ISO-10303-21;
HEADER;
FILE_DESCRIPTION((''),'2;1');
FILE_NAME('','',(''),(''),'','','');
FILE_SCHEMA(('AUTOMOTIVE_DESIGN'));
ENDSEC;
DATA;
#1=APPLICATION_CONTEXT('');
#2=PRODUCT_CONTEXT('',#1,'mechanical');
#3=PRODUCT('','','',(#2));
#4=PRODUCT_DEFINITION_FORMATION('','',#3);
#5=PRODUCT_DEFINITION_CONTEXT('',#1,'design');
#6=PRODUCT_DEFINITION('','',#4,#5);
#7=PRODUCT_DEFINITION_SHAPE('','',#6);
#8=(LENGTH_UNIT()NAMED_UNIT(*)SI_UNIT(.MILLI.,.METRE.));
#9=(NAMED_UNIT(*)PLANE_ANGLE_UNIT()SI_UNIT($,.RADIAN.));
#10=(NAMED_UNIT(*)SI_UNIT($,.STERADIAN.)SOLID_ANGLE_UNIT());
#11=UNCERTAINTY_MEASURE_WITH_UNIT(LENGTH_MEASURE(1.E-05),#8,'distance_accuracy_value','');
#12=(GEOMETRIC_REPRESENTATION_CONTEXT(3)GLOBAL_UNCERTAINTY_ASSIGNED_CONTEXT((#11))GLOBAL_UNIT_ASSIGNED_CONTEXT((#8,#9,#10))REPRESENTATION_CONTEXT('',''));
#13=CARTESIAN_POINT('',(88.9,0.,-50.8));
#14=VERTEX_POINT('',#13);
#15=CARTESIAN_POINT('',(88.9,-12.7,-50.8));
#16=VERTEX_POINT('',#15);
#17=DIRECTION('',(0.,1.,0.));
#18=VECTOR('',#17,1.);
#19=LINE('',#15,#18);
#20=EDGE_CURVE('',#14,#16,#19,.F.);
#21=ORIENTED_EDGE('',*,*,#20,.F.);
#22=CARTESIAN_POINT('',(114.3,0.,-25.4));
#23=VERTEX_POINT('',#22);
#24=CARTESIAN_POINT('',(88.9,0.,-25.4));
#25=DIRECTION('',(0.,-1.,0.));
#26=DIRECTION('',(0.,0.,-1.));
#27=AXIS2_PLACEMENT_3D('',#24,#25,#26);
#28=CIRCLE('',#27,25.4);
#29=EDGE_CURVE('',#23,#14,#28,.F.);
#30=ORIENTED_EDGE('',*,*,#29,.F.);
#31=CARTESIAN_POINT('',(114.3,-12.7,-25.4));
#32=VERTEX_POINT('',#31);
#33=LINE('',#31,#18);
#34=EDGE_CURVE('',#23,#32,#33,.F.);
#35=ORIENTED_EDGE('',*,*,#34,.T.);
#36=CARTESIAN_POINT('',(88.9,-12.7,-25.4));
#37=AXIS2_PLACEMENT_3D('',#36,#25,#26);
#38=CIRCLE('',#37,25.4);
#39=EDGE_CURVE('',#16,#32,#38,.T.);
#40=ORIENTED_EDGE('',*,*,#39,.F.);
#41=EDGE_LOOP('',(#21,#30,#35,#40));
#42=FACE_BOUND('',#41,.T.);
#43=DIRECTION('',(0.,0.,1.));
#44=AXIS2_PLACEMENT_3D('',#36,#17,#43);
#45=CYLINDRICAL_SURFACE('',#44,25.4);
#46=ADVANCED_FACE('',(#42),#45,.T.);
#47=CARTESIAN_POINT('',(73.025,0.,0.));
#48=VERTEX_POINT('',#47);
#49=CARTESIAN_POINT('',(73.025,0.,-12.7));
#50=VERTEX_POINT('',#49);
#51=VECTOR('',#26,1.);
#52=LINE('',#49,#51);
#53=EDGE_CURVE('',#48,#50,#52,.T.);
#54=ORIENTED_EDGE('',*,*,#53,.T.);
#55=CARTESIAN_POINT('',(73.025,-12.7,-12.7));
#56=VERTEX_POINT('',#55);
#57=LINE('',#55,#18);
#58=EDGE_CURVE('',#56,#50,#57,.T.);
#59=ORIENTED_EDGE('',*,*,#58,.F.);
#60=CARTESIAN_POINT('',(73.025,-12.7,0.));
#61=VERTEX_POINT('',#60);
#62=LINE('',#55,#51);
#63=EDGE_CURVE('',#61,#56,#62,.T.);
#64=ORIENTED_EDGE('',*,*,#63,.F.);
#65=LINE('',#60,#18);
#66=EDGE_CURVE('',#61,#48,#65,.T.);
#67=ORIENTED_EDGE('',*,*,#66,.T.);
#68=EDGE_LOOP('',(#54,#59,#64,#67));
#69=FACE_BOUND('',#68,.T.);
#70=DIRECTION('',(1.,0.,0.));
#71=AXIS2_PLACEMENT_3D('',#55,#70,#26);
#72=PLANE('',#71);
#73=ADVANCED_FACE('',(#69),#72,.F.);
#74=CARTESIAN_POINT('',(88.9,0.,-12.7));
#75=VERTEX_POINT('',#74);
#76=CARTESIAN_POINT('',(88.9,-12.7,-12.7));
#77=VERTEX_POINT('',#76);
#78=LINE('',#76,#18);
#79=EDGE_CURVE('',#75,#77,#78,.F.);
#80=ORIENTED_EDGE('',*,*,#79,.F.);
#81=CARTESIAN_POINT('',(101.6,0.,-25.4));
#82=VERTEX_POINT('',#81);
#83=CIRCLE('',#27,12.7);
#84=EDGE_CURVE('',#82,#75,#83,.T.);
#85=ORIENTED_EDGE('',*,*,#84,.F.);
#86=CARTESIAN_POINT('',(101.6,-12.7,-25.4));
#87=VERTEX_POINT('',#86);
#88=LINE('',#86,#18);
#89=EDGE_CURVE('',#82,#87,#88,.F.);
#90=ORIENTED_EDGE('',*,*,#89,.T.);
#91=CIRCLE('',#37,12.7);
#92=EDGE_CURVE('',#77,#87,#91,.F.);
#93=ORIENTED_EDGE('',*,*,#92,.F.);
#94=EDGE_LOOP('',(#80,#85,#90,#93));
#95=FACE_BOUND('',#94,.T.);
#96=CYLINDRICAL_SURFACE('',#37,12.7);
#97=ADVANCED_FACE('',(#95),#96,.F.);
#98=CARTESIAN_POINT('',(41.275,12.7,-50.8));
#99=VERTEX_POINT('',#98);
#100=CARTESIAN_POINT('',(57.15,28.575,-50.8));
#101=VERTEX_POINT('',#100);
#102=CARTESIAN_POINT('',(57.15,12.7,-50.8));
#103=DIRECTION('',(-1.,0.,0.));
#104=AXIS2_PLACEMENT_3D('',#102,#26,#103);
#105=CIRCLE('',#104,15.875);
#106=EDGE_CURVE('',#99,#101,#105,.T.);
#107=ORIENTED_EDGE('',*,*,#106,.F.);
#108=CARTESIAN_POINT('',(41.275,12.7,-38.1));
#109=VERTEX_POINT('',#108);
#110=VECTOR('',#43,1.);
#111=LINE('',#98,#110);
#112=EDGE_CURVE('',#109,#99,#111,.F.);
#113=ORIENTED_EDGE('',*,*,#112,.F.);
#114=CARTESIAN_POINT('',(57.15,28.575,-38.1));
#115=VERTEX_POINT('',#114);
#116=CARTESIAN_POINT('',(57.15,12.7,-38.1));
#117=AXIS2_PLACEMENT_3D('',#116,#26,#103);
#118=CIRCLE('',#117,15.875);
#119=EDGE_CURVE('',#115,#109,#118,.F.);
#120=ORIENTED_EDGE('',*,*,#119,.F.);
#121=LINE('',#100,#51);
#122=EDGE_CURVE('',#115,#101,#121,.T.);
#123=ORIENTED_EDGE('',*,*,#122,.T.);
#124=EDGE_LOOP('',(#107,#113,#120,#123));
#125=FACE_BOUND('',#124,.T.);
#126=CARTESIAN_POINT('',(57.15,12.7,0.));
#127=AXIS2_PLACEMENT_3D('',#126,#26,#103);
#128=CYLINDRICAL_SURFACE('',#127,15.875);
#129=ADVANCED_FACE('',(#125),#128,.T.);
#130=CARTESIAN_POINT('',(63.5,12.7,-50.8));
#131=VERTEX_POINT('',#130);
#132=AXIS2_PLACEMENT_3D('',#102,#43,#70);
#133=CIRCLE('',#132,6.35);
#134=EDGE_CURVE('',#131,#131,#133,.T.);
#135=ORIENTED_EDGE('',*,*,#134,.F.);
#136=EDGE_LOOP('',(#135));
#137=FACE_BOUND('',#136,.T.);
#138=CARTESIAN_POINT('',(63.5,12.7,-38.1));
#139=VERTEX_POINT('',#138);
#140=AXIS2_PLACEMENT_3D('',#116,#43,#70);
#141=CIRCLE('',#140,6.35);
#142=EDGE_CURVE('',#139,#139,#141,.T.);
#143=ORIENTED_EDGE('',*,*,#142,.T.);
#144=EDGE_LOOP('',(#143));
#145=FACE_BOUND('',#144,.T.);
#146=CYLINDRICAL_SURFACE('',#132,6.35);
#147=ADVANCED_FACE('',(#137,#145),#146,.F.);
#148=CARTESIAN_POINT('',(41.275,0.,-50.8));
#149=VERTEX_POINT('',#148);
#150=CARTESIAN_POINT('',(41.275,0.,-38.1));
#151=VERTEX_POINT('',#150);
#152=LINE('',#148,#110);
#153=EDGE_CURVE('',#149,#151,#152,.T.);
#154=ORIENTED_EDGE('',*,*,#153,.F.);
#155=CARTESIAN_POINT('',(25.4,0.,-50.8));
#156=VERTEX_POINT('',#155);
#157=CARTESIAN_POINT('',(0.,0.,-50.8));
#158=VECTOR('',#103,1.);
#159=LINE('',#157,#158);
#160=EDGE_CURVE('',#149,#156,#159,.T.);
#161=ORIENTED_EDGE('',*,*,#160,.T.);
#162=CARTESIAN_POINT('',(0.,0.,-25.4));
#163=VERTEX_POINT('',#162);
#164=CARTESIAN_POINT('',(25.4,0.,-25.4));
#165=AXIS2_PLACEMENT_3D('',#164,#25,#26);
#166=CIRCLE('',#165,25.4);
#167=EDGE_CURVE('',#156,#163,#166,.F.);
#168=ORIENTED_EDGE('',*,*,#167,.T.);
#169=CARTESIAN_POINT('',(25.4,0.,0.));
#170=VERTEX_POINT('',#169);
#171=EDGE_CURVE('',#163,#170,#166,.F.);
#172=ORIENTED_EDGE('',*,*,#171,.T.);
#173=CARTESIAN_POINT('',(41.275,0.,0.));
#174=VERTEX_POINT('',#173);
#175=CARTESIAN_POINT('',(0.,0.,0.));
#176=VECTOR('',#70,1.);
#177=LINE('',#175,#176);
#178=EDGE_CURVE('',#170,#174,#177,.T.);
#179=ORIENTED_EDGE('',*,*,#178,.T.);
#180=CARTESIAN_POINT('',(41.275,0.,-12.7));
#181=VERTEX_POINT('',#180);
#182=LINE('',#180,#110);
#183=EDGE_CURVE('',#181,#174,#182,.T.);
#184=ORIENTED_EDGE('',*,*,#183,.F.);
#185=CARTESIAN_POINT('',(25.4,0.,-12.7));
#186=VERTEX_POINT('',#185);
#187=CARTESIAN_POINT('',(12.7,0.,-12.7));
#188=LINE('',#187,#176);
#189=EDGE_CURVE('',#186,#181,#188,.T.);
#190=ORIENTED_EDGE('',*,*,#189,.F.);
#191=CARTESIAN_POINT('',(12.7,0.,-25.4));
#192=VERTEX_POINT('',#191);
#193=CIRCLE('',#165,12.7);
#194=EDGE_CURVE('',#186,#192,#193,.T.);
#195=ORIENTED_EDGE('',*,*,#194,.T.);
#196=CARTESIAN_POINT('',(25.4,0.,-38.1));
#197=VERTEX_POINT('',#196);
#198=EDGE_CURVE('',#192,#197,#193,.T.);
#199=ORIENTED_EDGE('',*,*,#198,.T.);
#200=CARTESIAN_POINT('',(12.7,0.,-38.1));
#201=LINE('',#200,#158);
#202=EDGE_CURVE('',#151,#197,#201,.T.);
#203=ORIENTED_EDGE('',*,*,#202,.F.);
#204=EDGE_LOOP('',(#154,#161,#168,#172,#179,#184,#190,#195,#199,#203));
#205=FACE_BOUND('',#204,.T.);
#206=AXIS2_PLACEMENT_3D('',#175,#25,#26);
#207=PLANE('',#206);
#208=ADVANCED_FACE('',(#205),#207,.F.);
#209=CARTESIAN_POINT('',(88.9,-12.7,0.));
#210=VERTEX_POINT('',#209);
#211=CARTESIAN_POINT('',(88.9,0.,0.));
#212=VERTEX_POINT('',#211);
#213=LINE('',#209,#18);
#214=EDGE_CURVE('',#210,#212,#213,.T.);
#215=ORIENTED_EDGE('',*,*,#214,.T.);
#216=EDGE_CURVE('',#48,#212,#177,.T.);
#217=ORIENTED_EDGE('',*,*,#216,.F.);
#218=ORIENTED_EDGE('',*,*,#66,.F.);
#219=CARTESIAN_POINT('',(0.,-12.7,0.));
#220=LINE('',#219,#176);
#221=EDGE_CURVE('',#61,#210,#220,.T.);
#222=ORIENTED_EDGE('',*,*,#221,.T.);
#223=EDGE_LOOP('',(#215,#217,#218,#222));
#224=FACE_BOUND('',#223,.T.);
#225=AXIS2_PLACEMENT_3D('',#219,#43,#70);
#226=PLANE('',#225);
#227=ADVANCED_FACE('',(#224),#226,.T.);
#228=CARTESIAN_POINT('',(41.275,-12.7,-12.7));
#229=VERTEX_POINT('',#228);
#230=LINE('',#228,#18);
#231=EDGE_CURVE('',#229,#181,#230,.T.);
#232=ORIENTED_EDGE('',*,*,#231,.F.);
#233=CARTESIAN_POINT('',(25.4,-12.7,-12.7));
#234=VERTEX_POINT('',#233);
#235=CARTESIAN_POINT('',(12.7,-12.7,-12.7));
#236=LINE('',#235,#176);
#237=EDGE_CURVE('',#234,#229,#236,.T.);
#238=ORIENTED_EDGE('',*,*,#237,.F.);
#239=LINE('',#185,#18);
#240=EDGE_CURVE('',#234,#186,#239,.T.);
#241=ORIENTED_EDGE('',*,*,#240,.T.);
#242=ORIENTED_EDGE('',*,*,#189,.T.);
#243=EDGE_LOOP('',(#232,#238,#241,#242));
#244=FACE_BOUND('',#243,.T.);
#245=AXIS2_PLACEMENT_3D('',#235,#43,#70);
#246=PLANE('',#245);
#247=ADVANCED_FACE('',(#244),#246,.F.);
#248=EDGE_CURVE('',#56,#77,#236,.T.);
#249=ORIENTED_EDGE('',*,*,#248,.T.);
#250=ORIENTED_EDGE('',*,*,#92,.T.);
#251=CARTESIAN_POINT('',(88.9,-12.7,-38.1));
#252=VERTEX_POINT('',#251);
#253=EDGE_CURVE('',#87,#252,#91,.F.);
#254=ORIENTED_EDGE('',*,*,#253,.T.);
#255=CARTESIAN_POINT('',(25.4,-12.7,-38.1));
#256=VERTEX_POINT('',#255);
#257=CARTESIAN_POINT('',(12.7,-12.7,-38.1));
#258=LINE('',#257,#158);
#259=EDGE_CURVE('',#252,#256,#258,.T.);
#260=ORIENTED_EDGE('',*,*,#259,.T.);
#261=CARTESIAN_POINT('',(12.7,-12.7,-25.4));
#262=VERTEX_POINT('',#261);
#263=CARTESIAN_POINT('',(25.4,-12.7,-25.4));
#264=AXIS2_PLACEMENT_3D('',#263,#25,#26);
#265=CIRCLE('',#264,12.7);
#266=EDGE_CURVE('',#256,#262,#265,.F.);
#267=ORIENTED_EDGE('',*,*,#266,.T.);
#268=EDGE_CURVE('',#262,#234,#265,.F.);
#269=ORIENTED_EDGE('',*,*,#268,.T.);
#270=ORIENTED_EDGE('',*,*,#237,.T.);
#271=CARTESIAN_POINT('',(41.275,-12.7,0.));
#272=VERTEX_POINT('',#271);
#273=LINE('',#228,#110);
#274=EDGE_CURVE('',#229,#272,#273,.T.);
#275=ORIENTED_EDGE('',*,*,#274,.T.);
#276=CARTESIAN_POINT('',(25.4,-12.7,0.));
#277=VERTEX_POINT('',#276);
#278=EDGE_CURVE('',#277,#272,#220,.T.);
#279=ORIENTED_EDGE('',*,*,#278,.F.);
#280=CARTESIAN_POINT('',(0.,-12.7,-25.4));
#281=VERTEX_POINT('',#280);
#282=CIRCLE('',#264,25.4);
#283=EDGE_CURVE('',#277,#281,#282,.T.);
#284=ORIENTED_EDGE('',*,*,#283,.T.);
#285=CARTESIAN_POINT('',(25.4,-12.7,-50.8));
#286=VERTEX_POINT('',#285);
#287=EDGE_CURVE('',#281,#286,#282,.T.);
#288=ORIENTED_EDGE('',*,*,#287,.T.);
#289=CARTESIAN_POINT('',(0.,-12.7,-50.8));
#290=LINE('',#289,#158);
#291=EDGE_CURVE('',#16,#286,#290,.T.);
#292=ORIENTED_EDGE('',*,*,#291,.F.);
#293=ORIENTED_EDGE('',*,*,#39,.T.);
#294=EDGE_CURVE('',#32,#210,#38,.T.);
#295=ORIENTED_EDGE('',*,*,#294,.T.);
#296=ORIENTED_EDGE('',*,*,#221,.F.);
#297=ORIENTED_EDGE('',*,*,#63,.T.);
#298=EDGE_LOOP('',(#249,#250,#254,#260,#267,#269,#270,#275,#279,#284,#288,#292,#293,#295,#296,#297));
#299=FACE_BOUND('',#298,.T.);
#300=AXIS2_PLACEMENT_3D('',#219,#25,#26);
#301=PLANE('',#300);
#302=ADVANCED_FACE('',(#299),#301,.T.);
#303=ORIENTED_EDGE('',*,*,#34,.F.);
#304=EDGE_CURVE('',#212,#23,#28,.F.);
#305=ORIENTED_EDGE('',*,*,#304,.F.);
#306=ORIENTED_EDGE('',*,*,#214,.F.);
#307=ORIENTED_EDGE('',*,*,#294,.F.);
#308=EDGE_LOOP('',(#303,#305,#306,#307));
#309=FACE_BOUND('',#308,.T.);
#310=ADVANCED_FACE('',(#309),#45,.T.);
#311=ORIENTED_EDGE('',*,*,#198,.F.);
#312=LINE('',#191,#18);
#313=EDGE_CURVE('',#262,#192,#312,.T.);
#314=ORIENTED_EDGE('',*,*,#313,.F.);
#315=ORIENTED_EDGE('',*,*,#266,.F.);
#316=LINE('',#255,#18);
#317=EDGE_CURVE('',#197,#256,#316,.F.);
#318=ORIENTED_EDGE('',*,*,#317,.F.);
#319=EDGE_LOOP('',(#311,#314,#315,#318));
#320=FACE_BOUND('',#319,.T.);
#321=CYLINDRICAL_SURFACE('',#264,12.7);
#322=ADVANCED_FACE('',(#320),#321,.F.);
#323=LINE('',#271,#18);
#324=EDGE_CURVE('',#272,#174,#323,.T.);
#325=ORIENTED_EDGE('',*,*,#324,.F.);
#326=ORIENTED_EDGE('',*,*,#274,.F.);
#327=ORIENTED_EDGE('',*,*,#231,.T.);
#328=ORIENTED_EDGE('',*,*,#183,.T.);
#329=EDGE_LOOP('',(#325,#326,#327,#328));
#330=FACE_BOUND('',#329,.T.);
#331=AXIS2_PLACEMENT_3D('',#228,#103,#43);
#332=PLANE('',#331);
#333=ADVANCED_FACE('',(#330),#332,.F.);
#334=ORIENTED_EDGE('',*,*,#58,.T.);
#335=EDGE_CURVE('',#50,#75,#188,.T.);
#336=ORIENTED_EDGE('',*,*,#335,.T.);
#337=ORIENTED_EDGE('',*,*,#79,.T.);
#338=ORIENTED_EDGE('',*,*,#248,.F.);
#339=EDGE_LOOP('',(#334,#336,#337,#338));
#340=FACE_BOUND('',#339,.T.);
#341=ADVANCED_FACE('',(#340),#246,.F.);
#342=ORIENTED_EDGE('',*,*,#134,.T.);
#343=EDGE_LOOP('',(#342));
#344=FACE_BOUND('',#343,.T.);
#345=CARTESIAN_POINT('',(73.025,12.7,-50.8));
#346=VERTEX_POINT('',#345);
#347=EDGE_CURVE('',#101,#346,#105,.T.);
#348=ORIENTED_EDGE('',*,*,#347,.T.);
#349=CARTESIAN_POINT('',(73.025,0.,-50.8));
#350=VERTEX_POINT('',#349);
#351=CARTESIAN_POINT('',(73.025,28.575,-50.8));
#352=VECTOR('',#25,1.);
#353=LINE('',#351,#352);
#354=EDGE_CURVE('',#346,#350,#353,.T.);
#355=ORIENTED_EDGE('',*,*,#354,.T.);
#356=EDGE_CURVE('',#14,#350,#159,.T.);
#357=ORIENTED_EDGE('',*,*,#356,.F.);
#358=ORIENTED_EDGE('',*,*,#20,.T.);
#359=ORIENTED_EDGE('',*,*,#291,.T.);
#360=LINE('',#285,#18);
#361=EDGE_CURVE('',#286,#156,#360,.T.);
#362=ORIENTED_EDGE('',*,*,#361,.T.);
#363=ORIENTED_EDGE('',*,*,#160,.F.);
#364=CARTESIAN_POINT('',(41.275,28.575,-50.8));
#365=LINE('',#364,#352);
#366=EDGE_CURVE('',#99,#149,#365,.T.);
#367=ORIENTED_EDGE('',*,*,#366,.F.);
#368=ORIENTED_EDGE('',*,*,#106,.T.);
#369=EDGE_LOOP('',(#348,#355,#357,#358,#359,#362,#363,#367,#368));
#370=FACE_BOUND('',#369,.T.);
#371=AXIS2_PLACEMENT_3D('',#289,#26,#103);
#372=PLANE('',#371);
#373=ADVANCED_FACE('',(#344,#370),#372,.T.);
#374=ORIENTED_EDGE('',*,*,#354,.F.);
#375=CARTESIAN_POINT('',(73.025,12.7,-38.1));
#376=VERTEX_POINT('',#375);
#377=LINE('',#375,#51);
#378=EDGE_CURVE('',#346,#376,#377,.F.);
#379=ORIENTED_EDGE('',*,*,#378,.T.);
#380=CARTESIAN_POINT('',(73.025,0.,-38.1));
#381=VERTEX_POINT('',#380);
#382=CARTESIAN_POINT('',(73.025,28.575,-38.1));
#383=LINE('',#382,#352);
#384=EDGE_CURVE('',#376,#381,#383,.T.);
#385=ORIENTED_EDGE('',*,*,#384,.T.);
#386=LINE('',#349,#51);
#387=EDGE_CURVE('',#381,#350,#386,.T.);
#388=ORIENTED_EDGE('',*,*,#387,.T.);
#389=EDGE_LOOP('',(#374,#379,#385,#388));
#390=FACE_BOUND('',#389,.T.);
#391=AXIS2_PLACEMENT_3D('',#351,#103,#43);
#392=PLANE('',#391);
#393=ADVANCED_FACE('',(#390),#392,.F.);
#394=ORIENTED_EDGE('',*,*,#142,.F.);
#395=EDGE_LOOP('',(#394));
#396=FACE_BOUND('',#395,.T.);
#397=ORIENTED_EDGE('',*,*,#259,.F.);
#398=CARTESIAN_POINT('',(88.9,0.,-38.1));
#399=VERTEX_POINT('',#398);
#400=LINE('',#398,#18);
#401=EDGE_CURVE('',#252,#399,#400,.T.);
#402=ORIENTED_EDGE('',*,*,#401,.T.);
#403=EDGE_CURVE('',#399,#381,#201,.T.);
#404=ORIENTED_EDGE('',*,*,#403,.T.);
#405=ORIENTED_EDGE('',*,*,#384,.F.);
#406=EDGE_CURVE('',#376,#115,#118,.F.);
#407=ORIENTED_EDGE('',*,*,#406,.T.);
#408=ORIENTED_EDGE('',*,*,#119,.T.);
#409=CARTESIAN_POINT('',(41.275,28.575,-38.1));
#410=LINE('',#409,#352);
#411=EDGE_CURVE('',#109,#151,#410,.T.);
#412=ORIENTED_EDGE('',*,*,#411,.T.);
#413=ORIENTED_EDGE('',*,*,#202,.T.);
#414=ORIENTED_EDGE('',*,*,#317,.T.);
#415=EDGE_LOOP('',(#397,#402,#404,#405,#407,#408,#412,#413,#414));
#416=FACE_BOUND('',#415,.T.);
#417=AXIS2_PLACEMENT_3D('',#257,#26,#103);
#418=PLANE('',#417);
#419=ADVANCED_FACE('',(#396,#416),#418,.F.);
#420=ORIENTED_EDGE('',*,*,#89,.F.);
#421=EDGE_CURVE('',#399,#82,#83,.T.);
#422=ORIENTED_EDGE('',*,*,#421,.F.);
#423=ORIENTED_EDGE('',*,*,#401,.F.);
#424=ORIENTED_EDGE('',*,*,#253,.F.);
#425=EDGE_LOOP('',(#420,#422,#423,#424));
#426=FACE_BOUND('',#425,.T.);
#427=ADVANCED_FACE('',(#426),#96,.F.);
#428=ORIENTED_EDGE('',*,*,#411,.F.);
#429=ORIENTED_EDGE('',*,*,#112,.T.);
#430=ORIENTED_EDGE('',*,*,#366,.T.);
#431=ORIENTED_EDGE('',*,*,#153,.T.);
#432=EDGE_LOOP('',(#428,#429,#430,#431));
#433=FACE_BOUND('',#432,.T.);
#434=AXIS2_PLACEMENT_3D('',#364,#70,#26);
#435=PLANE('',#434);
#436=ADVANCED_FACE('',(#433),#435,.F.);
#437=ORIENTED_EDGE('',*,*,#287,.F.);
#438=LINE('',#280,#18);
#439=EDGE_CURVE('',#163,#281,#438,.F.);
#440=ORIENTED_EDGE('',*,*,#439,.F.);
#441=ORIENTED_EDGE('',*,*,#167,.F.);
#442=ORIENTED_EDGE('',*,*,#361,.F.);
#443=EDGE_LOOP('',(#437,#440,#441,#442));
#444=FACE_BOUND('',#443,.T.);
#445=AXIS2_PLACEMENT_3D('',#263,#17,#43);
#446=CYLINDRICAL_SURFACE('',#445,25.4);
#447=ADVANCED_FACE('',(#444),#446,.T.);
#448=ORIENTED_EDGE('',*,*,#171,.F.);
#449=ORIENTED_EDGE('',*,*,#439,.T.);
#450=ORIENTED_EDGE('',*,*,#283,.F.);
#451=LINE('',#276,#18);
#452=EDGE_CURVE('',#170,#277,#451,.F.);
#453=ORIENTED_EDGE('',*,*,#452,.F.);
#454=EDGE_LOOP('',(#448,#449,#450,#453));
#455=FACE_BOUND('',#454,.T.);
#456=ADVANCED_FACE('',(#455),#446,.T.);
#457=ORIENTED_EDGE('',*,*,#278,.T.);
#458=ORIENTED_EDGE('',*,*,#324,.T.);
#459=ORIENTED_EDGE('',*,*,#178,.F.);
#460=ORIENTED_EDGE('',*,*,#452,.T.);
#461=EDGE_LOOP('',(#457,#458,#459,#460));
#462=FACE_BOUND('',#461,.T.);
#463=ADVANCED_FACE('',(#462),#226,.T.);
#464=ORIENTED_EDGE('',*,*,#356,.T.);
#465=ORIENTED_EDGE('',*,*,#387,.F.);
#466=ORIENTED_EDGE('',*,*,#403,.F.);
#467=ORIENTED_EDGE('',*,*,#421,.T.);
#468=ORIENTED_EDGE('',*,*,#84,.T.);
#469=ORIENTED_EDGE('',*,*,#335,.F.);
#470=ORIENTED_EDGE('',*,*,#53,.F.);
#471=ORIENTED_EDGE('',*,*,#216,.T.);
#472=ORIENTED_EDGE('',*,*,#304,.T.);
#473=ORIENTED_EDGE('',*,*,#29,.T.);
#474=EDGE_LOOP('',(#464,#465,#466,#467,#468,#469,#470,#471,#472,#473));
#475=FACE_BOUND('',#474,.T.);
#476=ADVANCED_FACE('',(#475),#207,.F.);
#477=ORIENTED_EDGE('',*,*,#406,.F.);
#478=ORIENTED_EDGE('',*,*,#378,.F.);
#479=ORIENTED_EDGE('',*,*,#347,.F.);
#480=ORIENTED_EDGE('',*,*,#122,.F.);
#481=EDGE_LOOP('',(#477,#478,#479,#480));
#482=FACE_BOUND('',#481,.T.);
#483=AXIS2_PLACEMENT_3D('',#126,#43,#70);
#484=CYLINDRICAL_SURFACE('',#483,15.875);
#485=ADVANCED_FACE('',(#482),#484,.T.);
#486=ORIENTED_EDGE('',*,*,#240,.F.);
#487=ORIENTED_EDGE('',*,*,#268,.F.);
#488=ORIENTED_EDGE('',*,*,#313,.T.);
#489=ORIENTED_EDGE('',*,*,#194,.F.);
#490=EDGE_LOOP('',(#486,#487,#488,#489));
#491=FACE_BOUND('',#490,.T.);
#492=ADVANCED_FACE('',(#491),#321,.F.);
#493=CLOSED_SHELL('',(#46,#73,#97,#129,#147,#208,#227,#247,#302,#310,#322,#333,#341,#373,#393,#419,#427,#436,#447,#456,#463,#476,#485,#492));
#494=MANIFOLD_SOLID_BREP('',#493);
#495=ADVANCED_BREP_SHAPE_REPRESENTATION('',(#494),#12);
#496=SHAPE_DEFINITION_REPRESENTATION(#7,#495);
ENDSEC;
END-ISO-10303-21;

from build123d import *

# Parameters (mm, degrees)
SKETCH2_W           = 114.3
SKETCH2_H           = 50.8
SKETCH2_W_2         = 88.9
SKETCH2_H_2         = 25.4
BOSS_EXTRUDE1_DEPTH = 12.7
FILLET3_R           = 25.4
FILLET4_R           = 12.7
SKETCH5_W           = 31.75
SKETCH5_H           = 12.7
BOSS_EXTRUDE2_DEPTH = 28.575
FILLET5_R           = 15.875
SKETCH6_R           = 6.35
CUT_EXTRUDE1_DEPTH  = 124.825
SKETCH7_W           = 31.75
SKETCH7_H           = 12.7
CUT_EXTRUDE2_DEPTH  = 129.30300318


with BuildPart() as part:
    # Sketch2 → Boss-Extrude1 (new body)
    with BuildSketch(Plane(origin=(0, 0, 0), x_dir=(1, 0, 0), z_dir=(0, 1, 0))):
        with Locations((57.15, 25.4)):
            Rectangle(SKETCH2_W, SKETCH2_H)
        with Locations((57.15, 25.4)):
            Rectangle(SKETCH2_W_2, SKETCH2_H_2, mode=Mode.SUBTRACT)
    extrude(amount=-BOSS_EXTRUDE1_DEPTH)

    # Fillet3
    fillet3_edges = [part.edges().sort_by_distance(p)[0] for p in [
        (0, -6.35, 0),
        (0, -6.35, -50.8),
        (114.3, -6.35, -50.8),
        (114.3, -6.35, 0),
    ]]
    fillet(fillet3_edges, radius=FILLET3_R - 0.0001)  # a hair under: the kernel refuses the full size

    # Fillet4
    fillet4_edges = [part.edges().sort_by_distance(p)[0] for p in [
        (12.7, -6.35, -12.7),
        (101.6, -6.35, -12.7),
        (101.6, -6.35, -38.1),
        (12.7, -6.35, -38.1),
    ]]
    fillet(fillet4_edges, radius=FILLET4_R - 0.0001)  # a hair under: the kernel refuses the full size

    # Sketch5 → Boss-Extrude2 (add)
    with BuildSketch(Plane(origin=(0, 0, 0), x_dir=(1, 0, 0), z_dir=(0, 1, 0))):
        with Locations((57.15, 44.45)):
            Rectangle(SKETCH5_W, SKETCH5_H)
    extrude(amount=BOSS_EXTRUDE2_DEPTH)

    # Fillet5
    fillet5_edges = [part.edges().sort_by_distance(p)[0] for p in [
        (41.275, 28.575, -44.45),
        (73.025, 28.575, -44.45),
    ]]
    fillet(fillet5_edges, radius=FILLET5_R - 0.0001)  # a hair under: the kernel refuses the full size

    # Sketch6 → Cut-Extrude1 (cut, through all)
    with BuildSketch(Plane.XY.offset(-38.1)):
        with Locations((57.15, 12.7)):
            Circle(SKETCH6_R)
    extrude(amount=-CUT_EXTRUDE1_DEPTH, mode=Mode.SUBTRACT)

    # Sketch7 → Cut-Extrude2 (cut, through all)
    with BuildSketch(Plane(origin=(0, 0, 0), x_dir=(1, 0, 0), z_dir=(0, 1, 0))):
        with Locations((57.15, 6.35)):
            Rectangle(SKETCH7_W, SKETCH7_H)
    extrude(amount=-CUT_EXTRUDE2_DEPTH, mode=Mode.SUBTRACT)


solid = part.part
